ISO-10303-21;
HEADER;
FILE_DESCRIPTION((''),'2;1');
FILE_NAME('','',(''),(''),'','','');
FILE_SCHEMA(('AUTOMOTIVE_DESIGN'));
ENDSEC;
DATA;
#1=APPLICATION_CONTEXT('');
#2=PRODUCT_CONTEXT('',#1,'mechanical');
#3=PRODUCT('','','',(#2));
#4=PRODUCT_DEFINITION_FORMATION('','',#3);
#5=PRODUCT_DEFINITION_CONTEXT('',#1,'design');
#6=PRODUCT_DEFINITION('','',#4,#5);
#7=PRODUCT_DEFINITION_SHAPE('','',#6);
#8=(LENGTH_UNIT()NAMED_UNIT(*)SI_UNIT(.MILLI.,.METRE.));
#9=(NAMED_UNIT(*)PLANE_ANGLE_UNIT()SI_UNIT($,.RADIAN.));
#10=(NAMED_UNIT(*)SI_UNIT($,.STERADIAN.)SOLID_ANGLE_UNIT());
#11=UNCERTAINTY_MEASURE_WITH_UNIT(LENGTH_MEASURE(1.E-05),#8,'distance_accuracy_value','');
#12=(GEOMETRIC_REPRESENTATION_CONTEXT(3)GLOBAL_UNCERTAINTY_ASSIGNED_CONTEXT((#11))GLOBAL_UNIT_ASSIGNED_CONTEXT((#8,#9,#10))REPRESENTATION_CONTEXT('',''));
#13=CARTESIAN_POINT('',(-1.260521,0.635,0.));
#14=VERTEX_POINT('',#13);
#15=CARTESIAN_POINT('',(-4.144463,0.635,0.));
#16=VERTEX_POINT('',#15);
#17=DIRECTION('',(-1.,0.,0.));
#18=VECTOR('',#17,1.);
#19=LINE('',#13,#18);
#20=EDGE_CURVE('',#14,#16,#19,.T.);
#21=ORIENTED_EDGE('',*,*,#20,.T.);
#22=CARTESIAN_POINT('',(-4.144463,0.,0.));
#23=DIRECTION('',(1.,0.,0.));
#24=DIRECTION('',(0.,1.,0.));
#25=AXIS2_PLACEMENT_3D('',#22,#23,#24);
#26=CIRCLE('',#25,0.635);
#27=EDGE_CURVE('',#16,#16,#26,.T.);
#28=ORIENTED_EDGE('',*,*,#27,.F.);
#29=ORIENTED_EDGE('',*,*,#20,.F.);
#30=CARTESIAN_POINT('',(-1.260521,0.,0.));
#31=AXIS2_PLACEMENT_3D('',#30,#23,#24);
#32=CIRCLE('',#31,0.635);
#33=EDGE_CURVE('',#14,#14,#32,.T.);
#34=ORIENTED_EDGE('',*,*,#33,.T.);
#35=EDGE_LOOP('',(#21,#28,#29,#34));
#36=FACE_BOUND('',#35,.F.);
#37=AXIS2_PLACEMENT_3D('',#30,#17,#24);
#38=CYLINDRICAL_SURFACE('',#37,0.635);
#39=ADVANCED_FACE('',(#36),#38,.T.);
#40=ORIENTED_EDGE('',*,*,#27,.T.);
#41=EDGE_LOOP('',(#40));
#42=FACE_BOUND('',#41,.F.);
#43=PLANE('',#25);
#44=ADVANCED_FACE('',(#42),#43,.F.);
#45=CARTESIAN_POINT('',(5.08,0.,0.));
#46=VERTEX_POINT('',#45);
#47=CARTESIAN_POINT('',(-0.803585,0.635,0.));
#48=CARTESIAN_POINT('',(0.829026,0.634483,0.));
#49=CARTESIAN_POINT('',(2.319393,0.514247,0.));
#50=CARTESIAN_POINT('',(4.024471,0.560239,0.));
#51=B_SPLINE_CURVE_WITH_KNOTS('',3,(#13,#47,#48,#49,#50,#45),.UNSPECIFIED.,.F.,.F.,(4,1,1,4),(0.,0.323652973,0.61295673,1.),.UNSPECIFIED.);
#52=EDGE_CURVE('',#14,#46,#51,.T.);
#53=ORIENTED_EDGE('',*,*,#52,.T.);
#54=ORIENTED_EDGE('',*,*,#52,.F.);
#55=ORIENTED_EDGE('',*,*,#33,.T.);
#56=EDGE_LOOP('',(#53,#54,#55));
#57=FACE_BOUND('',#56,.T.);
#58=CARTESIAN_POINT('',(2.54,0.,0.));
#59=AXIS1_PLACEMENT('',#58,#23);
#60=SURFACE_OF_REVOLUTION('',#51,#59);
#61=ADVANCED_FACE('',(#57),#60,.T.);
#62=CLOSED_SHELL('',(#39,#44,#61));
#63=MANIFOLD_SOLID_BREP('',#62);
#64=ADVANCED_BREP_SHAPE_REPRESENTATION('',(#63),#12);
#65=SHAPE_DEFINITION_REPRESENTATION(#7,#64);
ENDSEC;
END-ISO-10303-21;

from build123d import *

# Parameters (mm, degrees)
F2_SCALE = 0.5


with BuildPart() as f1:
    # F0 (on Top) → F1 (revolve)
    with BuildSketch(Plane.XY):
        with BuildLine():
            Line((-8.2889255136, 0), (0, 0))
            Line((0, 0), (10.16, 0))
            add(Edge.make_bspline(
                [(-2.521042089, 1.27), (-1.6071708661, 1.27), (1.6580526523, 1.2689667271), (4.6387866527, 1.0284940171), (8.0489429836, 1.1204775711), (10.16, 0)],
                knots=[0, 0, 0, 0, 0.3236529728, 0.6129567303, 1, 1, 1, 1], degree=3))
            Line((-2.521042089, 1.27), (-8.2889255136, 1.27))
            Line((-8.2889255136, 1.27), (-8.2889255136, 0))
        make_face()
    revolve(axis=Axis((5.08, 0, 0), (1, 0, 0)))


with BuildPart() as f1_1:
    # F2: moved
    add(f1.part.scale(F2_SCALE))


solid = f1_1.part
